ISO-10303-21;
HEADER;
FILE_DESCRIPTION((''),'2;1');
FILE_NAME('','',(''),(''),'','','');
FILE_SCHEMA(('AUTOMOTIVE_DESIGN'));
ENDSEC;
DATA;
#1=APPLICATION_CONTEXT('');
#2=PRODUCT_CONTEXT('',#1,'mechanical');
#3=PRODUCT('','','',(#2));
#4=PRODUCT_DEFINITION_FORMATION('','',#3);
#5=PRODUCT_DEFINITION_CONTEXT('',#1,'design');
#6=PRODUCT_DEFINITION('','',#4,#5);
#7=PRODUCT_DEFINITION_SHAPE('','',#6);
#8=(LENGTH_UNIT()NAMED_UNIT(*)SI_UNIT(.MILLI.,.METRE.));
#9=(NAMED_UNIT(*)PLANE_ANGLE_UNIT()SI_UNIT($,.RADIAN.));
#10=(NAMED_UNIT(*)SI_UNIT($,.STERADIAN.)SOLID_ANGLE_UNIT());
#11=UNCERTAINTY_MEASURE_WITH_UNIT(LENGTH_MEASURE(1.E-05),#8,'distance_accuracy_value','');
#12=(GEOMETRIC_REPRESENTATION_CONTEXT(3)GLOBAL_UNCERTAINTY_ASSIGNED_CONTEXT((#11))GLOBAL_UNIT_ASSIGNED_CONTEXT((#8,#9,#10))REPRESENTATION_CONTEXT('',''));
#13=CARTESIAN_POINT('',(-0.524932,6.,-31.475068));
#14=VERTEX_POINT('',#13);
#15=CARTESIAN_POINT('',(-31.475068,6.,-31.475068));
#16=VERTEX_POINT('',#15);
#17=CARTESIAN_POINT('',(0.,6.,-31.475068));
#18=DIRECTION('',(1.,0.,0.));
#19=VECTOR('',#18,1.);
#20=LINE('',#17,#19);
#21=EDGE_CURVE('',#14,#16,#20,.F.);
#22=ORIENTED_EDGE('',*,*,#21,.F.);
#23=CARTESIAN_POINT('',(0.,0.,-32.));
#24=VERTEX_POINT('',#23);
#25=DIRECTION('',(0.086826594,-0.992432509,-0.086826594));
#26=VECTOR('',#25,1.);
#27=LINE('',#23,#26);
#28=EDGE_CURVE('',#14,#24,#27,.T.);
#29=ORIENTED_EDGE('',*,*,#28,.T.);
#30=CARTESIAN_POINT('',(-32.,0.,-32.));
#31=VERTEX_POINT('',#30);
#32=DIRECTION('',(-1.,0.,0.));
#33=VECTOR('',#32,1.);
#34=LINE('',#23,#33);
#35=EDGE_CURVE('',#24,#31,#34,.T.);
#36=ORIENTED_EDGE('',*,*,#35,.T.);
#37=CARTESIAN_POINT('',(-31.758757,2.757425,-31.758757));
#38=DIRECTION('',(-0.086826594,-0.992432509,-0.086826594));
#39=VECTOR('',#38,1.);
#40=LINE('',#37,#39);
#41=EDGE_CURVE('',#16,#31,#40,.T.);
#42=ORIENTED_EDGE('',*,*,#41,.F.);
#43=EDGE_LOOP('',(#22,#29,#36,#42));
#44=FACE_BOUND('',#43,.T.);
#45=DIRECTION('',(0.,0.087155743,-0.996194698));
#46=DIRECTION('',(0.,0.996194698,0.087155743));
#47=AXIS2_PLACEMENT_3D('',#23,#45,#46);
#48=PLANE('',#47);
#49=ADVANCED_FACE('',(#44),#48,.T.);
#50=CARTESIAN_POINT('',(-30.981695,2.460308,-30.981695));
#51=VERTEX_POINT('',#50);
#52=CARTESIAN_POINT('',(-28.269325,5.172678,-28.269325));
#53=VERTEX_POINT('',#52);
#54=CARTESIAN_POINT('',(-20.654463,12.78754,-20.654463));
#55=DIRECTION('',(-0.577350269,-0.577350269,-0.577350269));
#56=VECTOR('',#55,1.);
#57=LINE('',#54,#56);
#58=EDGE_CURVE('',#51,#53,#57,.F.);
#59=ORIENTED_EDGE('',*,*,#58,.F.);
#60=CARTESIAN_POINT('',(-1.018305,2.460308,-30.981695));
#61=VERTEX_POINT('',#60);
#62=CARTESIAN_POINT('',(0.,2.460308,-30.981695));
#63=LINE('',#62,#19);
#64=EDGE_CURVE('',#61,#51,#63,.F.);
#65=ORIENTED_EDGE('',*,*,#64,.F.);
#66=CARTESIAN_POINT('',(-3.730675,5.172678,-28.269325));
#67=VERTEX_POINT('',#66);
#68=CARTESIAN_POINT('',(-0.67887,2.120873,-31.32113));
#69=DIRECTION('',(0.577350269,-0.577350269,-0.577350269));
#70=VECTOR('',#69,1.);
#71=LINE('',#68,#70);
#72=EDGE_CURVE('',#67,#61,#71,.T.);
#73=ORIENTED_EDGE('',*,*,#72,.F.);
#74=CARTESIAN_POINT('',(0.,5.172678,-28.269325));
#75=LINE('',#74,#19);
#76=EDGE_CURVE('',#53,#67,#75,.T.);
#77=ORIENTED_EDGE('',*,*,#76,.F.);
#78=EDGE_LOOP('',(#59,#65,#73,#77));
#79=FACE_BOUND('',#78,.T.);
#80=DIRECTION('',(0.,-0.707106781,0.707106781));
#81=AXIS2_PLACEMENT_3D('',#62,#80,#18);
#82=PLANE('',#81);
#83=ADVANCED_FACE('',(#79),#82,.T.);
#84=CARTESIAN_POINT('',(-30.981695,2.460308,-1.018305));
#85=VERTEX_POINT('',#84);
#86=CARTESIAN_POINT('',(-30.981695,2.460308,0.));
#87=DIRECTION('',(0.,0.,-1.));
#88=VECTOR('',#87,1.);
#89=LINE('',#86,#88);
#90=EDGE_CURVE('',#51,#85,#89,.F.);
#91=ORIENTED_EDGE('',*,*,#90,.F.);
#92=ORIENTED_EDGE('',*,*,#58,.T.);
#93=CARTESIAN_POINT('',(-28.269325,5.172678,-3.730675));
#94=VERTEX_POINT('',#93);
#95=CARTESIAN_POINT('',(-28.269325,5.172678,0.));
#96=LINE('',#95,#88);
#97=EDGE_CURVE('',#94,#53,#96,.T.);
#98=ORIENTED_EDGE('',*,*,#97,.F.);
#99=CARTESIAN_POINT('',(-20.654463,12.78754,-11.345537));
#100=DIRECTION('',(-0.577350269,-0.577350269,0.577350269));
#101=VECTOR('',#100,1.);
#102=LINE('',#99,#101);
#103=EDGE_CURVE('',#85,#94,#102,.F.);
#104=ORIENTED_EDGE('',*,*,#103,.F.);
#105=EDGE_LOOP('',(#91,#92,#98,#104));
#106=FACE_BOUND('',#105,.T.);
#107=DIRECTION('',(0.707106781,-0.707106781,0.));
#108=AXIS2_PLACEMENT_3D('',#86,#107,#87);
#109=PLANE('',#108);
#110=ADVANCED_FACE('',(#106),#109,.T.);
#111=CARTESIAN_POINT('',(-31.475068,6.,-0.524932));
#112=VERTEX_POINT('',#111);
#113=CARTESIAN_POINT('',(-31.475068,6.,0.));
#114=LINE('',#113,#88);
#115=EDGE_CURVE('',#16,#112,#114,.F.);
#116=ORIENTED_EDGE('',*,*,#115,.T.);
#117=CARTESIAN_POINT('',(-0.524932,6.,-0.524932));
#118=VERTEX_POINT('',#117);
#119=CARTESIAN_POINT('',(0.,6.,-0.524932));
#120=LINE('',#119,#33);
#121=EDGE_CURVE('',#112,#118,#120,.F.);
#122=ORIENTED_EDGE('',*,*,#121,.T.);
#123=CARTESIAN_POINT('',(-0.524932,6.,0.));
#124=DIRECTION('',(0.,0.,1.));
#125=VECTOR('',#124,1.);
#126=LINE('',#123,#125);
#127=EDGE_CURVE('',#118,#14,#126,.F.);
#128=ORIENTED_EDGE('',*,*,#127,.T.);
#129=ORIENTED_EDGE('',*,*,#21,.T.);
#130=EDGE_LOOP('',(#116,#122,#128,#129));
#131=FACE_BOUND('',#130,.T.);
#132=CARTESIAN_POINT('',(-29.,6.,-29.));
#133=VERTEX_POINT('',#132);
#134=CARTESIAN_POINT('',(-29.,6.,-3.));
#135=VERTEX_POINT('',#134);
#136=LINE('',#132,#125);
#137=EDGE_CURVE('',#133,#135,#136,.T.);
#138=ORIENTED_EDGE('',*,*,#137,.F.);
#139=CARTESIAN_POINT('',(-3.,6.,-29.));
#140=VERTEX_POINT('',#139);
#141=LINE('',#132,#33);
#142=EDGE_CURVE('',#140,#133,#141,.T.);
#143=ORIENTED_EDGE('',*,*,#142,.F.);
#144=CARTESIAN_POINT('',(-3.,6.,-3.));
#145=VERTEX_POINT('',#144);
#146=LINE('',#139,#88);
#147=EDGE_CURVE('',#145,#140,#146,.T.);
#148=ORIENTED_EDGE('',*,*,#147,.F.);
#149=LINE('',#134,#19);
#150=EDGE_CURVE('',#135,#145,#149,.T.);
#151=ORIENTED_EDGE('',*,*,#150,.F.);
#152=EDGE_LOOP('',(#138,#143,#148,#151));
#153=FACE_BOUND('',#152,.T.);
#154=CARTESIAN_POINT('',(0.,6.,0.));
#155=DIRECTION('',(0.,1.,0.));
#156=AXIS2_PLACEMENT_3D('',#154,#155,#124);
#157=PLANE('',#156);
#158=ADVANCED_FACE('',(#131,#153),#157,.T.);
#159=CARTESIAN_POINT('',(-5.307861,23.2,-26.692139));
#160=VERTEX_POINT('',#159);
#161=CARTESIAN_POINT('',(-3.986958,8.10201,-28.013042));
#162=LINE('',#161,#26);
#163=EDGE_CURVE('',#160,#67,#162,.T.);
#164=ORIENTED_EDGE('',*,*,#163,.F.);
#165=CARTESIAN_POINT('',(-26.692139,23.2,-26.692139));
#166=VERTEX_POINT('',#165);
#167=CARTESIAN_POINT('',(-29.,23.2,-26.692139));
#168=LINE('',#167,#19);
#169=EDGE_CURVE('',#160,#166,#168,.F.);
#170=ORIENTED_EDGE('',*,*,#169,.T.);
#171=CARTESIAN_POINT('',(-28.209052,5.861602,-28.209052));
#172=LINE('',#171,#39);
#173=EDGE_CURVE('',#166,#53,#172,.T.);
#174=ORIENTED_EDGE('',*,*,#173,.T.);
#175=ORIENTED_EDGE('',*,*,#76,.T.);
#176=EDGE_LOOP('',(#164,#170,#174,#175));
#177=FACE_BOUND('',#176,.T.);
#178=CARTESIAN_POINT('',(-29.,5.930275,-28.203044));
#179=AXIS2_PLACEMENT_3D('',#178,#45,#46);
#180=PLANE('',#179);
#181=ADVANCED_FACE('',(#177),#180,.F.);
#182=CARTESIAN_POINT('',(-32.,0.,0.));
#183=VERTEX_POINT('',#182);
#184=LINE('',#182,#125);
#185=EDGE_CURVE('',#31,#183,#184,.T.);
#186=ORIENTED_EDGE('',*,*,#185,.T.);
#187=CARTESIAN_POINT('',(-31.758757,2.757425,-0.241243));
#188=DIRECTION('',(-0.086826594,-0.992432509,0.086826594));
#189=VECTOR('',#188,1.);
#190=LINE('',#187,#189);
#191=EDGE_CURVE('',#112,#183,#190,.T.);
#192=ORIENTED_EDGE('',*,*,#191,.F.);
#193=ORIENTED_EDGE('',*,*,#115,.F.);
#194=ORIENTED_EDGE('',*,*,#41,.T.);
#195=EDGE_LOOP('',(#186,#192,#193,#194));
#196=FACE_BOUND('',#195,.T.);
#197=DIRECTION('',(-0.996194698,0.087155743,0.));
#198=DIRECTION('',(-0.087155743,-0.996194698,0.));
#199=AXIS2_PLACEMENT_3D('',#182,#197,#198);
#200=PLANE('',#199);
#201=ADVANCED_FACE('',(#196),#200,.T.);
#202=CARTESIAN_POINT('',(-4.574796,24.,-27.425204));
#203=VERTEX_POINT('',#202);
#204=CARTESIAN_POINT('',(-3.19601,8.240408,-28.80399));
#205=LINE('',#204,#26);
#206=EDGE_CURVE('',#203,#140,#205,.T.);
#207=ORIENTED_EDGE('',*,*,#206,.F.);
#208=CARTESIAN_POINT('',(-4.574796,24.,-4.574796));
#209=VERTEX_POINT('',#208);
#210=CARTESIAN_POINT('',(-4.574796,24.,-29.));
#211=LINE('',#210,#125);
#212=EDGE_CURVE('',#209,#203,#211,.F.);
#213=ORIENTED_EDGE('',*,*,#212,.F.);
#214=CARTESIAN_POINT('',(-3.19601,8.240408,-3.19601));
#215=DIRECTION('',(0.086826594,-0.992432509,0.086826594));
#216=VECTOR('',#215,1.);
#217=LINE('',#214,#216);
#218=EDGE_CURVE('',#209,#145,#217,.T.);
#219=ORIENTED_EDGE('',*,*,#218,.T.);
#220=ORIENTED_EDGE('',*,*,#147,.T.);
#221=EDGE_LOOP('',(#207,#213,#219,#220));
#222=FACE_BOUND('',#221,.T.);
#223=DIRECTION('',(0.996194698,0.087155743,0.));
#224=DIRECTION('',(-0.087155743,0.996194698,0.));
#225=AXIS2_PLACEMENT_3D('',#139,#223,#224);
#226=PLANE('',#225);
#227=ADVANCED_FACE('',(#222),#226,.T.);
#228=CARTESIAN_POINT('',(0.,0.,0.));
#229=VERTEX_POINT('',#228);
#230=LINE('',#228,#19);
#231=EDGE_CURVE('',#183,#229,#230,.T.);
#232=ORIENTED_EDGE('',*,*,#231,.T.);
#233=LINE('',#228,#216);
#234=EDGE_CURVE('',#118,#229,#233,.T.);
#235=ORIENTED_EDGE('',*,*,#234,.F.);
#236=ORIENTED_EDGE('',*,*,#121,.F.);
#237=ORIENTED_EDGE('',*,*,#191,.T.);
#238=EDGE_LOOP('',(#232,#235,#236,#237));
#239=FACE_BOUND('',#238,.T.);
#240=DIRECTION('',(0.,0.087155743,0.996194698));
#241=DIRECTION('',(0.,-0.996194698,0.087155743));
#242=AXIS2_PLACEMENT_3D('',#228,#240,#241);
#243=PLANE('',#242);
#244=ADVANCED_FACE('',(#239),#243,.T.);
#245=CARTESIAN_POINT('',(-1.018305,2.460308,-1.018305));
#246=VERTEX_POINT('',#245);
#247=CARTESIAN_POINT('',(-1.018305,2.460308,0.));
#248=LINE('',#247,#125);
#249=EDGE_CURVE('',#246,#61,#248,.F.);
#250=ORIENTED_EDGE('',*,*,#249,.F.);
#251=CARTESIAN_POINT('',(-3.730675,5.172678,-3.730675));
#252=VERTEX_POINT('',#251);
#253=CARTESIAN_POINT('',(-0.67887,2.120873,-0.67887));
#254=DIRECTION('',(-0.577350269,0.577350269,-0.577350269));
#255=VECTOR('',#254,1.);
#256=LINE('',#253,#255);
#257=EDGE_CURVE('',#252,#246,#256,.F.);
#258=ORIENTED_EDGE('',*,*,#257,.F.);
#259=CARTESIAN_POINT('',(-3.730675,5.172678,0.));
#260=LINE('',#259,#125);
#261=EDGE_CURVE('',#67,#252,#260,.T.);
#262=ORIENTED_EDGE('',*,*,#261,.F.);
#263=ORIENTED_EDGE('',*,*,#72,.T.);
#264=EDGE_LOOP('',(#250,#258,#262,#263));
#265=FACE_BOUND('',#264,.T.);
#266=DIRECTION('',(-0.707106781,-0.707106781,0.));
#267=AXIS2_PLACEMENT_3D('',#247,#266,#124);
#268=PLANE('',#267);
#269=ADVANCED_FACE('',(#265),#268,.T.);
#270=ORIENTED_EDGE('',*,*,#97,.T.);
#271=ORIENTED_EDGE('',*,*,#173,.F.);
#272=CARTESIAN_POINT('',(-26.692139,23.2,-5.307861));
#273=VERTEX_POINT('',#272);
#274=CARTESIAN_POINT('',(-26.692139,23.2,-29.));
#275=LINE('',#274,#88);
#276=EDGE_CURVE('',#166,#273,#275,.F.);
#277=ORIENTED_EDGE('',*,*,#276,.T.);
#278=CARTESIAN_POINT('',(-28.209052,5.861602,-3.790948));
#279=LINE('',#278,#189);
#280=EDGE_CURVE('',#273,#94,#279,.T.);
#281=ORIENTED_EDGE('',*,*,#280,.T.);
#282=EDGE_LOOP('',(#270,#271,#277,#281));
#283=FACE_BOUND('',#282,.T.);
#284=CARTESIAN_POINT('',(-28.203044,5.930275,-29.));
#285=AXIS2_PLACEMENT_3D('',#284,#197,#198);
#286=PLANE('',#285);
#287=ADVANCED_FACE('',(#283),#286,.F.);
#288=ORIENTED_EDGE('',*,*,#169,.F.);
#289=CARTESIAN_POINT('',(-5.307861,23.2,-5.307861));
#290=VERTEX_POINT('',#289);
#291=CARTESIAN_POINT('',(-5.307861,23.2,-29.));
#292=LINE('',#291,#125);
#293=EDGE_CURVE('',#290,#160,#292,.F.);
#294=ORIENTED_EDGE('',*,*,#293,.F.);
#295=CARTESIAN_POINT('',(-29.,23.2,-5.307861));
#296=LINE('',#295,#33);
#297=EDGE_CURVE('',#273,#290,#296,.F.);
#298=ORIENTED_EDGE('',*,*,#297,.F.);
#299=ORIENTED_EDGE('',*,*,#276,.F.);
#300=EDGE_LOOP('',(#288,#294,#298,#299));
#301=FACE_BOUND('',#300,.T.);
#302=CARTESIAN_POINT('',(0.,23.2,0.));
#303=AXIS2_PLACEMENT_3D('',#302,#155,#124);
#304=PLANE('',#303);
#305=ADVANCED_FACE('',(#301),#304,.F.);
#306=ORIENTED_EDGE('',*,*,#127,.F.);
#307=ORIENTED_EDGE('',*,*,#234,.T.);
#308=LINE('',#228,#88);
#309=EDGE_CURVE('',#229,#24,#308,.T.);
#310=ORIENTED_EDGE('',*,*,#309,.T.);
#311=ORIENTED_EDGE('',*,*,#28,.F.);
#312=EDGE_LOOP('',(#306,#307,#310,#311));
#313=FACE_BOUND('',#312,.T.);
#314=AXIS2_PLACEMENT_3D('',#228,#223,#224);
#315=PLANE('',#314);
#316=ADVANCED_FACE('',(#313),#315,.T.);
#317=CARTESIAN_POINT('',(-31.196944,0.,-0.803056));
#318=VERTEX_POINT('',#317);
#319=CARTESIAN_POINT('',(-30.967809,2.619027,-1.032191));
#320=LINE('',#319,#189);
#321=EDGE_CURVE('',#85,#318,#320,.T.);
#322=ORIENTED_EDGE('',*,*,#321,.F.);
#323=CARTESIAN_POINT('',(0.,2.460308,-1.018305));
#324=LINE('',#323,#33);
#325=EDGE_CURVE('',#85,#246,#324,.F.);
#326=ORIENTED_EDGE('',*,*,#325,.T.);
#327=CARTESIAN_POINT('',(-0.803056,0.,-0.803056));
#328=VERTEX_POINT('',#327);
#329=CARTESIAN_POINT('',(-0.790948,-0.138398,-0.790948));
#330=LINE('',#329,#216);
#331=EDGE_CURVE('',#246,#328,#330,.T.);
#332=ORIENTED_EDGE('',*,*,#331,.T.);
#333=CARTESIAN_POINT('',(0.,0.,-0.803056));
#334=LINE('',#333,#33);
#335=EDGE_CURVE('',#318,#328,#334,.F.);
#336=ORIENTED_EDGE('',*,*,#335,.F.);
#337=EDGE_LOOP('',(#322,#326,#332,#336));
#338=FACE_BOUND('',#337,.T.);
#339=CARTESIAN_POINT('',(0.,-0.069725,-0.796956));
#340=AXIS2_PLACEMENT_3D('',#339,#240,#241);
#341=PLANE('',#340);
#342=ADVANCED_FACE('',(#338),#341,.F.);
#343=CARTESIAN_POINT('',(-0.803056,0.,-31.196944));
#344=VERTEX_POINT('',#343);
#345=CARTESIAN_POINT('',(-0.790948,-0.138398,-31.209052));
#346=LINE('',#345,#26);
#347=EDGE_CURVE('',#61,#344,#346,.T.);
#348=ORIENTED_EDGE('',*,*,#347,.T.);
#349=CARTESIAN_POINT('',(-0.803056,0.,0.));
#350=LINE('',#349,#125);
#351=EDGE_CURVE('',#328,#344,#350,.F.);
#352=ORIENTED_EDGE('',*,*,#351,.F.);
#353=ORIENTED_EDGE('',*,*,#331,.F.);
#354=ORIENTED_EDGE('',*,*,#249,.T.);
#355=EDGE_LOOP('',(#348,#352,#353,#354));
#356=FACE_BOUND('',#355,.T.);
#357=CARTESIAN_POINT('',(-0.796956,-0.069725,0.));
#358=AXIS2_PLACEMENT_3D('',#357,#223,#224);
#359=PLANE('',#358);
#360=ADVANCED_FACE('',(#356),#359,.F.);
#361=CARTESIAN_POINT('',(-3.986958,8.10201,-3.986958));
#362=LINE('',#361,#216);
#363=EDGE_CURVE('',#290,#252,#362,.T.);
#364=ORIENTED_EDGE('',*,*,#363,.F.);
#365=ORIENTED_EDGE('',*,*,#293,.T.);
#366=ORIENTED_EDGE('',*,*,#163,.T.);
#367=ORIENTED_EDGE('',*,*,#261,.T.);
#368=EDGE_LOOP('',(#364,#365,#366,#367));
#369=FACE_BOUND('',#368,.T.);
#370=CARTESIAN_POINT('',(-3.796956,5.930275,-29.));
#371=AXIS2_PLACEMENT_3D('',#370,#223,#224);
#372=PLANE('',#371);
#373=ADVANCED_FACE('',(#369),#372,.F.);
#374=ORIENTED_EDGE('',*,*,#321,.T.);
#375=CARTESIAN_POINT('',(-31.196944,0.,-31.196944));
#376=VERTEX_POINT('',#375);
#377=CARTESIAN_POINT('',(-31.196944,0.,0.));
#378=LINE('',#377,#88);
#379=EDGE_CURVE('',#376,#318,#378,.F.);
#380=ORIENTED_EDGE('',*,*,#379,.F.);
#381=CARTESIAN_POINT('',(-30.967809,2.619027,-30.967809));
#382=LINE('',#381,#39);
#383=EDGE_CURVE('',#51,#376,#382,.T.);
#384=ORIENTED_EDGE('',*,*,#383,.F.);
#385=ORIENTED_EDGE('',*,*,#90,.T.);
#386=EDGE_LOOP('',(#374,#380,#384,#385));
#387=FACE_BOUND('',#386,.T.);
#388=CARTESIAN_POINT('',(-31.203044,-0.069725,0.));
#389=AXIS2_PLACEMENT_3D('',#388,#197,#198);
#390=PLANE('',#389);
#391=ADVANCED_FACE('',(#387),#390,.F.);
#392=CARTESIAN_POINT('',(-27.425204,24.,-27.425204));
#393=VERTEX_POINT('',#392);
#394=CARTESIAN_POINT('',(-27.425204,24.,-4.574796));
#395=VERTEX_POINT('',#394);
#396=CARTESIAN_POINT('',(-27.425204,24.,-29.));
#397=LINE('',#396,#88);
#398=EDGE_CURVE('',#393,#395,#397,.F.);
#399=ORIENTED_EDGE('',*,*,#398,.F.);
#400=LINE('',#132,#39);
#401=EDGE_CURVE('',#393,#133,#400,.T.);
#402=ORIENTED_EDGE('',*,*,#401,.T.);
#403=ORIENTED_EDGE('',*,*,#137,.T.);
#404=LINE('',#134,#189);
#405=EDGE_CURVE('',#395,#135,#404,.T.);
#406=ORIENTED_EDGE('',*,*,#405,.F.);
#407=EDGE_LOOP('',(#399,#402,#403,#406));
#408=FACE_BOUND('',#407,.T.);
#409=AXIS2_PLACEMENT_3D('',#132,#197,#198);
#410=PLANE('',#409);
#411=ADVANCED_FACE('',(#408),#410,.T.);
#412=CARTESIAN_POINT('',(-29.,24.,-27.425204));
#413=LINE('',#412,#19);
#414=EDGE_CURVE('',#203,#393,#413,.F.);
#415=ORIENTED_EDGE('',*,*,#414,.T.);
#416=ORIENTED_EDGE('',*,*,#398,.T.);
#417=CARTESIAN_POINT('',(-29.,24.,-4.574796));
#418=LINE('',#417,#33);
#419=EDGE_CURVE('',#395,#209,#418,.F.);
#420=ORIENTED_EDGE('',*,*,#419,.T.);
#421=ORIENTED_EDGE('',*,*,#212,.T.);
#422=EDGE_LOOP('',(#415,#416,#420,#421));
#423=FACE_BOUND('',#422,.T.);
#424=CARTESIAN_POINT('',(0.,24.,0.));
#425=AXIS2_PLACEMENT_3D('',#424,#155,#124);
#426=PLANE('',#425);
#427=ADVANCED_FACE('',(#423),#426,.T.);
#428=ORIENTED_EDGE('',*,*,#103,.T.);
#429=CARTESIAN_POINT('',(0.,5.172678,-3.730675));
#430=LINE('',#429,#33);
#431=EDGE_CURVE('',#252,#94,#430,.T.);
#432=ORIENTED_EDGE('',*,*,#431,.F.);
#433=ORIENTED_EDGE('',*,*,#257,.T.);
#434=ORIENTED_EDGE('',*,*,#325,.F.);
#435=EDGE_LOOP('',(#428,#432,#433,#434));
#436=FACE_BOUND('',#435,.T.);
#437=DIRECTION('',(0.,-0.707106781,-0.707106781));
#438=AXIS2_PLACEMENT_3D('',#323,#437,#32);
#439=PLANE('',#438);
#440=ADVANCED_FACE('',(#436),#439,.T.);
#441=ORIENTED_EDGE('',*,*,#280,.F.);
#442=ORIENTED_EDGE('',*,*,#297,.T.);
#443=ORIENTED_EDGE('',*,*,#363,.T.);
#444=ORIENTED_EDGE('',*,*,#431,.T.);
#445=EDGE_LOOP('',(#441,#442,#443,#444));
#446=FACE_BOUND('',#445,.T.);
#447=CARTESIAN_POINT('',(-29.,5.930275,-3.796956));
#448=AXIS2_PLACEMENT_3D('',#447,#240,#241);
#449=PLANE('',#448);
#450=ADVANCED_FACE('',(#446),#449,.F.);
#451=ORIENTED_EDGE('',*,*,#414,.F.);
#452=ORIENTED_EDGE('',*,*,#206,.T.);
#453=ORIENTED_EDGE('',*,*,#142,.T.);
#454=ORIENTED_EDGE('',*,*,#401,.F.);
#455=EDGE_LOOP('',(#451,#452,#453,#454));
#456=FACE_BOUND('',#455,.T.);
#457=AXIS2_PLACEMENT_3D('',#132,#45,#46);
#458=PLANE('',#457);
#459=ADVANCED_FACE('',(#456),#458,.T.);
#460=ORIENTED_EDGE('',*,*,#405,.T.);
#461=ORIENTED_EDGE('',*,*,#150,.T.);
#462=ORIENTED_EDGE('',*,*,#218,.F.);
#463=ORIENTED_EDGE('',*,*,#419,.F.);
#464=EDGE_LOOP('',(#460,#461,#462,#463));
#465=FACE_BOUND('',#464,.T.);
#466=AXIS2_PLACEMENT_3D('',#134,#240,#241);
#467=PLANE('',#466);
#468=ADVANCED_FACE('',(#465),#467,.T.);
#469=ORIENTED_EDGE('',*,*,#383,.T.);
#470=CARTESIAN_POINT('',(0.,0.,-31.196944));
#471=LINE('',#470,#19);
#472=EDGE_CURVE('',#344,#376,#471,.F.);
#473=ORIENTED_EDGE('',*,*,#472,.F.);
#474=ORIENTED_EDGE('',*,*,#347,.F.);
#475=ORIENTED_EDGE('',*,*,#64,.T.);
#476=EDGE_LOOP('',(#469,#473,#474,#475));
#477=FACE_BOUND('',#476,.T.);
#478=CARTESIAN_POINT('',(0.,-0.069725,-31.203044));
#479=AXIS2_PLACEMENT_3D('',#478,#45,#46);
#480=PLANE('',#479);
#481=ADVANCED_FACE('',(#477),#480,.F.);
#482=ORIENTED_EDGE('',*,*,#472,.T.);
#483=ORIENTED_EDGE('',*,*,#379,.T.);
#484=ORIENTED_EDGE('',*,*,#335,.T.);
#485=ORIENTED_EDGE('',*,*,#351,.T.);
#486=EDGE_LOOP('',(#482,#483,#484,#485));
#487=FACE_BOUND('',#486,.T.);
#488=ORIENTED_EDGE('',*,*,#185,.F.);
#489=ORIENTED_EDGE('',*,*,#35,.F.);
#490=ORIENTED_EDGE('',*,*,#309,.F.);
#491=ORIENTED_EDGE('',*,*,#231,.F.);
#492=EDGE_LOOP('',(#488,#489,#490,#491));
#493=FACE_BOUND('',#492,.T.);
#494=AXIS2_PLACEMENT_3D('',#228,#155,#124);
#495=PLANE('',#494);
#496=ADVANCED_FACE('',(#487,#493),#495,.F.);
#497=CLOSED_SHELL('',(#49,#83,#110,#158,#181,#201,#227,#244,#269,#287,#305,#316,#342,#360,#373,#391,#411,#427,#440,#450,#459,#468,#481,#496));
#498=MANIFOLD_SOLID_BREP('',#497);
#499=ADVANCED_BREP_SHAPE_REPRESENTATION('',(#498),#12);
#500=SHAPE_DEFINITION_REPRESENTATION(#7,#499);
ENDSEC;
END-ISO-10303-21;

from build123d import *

# Parameters (mm, degrees)
SKETCH1_W           = 32
SKETCH1_H           = 32
BOSS_EXTRUDE1_DEPTH = 6
BOSS_EXTRUDE1_TAPER = 5
SKETCH2_W           = 26
SKETCH2_H           = 26
BOSS_EXTRUDE2_DEPTH = 18
BOSS_EXTRUDE2_TAPER = 5
SHELL1_T            = -0.8
CHAMFER1_SIZE       = 2.5
CHAMFER1_SIZE_2     = 2.750157169


with BuildPart() as part:
    # Sketch1 → Boss-Extrude1 (new body)
    with BuildSketch(Plane(origin=(0, 0, 0), x_dir=(1, 0, 0), z_dir=(0, 1, 0))):
        with Locations((-16, 16)):
            Rectangle(SKETCH1_W, SKETCH1_H)
    extrude(amount=BOSS_EXTRUDE1_DEPTH, taper=BOSS_EXTRUDE1_TAPER)

    # Sketch2 → Boss-Extrude2 (add)
    with BuildSketch(Plane(origin=(0, 6, 0), x_dir=(1, 0, 0), z_dir=(0, 1, 0))):
        with Locations((-16, 16)):
            Rectangle(SKETCH2_W, SKETCH2_H)
    extrude(amount=BOSS_EXTRUDE2_DEPTH, taper=BOSS_EXTRUDE2_TAPER)

    # Shell1
    shell1_openings = [part.faces().sort_by_distance(p)[0] for p in [
        (-16, 0, -16),
    ]]
    offset(amount=SHELL1_T, openings=shell1_openings, kind=Kind.INTERSECTION)

    # Chamfer1
    # the kernel refuses this chamfer: 2.750157169, 2.5 mm, written as the material it adds along each edge
    with BuildSketch(Plane(origin=(5.830274952, 5.2, -1.25799692), x_dir=(0, 0.030161850139926293, -0.9995450278982617), z_dir=(-1, 0, 0))) as chamfer1_piece_1_section:
        Polygon((CHAMFER1_SIZE * 0.999545027898, CHAMFER1_SIZE * 0.0301618501399), (-CHAMFER1_SIZE_2 * 0.117163164513, CHAMFER1_SIZE_2 * 0.993112678869), (0, 0), align=None)
    chamfer1_piece_1 = extrude(amount=43.660549905, mode=Mode.PRIVATE)
    chamfer1_piece_1 = split(chamfer1_piece_1, bisect_by=Plane(origin=(-1.2737044, 5.379537315, -3.779154262), z_dir=(-0.9961946980917455, -0.08715574274765792, 0)), keep=Keep.TOP, mode=Mode.PRIVATE)
    chamfer1_piece_1 = split(chamfer1_piece_1, bisect_by=Plane(origin=(-3.729971497, 5.164641789, -3.779154262), z_dir=(0.9961946980917455, 0.08715574274765821, 0)), keep=Keep.TOP, mode=Mode.PRIVATE)
    chamfer1_piece_1 = split(chamfer1_piece_1, bisect_by=Plane(origin=(-2.501837948, 5.275543614, -3.739674149), z_dir=(0, -0.08715574274765829, -0.9961946980917455)), keep=Keep.TOP, mode=Mode.PRIVATE)
    add(chamfer1_piece_1)
    with BuildSketch(Plane(origin=(5.830274952, 5.2, -1.25799692), x_dir=(0, 0.030161850139926293, -0.9995450278982617), z_dir=(-1, 0, 0))) as chamfer1_piece_2_section:
        Polygon((CHAMFER1_SIZE * 0.999545027898, CHAMFER1_SIZE * 0.0301618501399), (-CHAMFER1_SIZE_2 * 0.117163164513, CHAMFER1_SIZE_2 * 0.993112678869), (0, 0), align=None)
    chamfer1_piece_2 = extrude(amount=43.660549905, mode=Mode.PRIVATE)
    chamfer1_piece_2 = split(chamfer1_piece_2, bisect_by=Plane(origin=(-1.187972058, 4.399612159, -1.99521412), z_dir=(-0.9961946980917455, -0.08715574274765792, 0)), keep=Keep.TOP, mode=Mode.PRIVATE)
    chamfer1_piece_2 = split(chamfer1_piece_2, bisect_by=Plane(origin=(-3.644239154, 4.184716633, -1.99521412), z_dir=(0.9961946980917455, 0.08715574274765821, 0)), keep=Keep.TOP, mode=Mode.PRIVATE)
    chamfer1_piece_2 = split(chamfer1_piece_2, bisect_by=Plane(origin=(-2.416105606, 4.148173113, -3.641042011), z_dir=(0, 0.08715574274765829, 0.9961946980917455)), keep=Keep.TOP, mode=Mode.PRIVATE)
    add(chamfer1_piece_2)
    with BuildSketch(Plane(origin=(5.830274952, 5.2, -1.25799692), x_dir=(0, 0.030161850139926293, -0.9995450278982617), z_dir=(-1, 0, 0))) as chamfer1_piece_3_section:
        Polygon((CHAMFER1_SIZE * 0.999545027898, CHAMFER1_SIZE * 0.0301618501399), (-CHAMFER1_SIZE_2 * 0.117163164513, CHAMFER1_SIZE_2 * 0.993112678869), (0, 0), align=None)
    chamfer1_piece_3 = extrude(amount=43.660549905, mode=Mode.PRIVATE)
    chamfer1_piece_3 = split(chamfer1_piece_3, bisect_by=Plane(origin=(-3.747130429, 5.360769289, -1.993289961), z_dir=(-0.9961946980917455, -0.08715574274765821, 0)), keep=Keep.TOP, mode=Mode.PRIVATE)
    chamfer1_piece_3 = split(chamfer1_piece_3, bisect_by=Plane(origin=(-16, 4.144649452, -3.64073373), z_dir=(0, 0.08715574274765829, 0.9961946980917455)), keep=Keep.TOP, mode=Mode.PRIVATE)
    chamfer1_piece_3 = split(chamfer1_piece_3, bisect_by=Plane(origin=(-28.252869571, 5.360769289, -1.993289961), z_dir=(0.9961946980917455, -0.08715574274765829, 0)), keep=Keep.TOP, mode=Mode.PRIVATE)
    add(chamfer1_piece_3)
    with BuildSketch(Plane(origin=(5.830274952, 5.2, -1.25799692), x_dir=(0, 0.030161850139926293, -0.9995450278982617), z_dir=(-1, 0, 0))) as chamfer1_piece_4_section:
        Polygon((CHAMFER1_SIZE * 0.999545027898, CHAMFER1_SIZE * 0.0301618501399), (-CHAMFER1_SIZE_2 * 0.117163164513, CHAMFER1_SIZE_2 * 0.993112678869), (0, 0), align=None)
    chamfer1_piece_4 = extrude(amount=43.660549905, mode=Mode.PRIVATE)
    chamfer1_piece_4 = split(chamfer1_piece_4, bisect_by=Plane(origin=(-29.498162052, 5.275543614, -3.739674149), z_dir=(0, -0.08715574274765829, -0.9961946980917455)), keep=Keep.TOP, mode=Mode.PRIVATE)
    chamfer1_piece_4 = split(chamfer1_piece_4, bisect_by=Plane(origin=(-28.270028503, 5.164641789, -3.779154262), z_dir=(-0.9961946980917455, 0.08715574274765829, 0)), keep=Keep.TOP, mode=Mode.PRIVATE)
    chamfer1_piece_4 = split(chamfer1_piece_4, bisect_by=Plane(origin=(-30.7262956, 5.379537315, -3.779154262), z_dir=(0.9961946980917455, -0.08715574274765851, 0)), keep=Keep.TOP, mode=Mode.PRIVATE)
    add(chamfer1_piece_4)
    with BuildSketch(Plane(origin=(5.830274952, 5.2, -1.25799692), x_dir=(0, 0.030161850139926293, -0.9995450278982617), z_dir=(-1, 0, 0))) as chamfer1_piece_5_section:
        Polygon((CHAMFER1_SIZE * 0.999545027898, CHAMFER1_SIZE * 0.0301618501399), (-CHAMFER1_SIZE_2 * 0.117163164513, CHAMFER1_SIZE_2 * 0.993112678869), (0, 0), align=None)
    chamfer1_piece_5 = extrude(amount=43.660549905, mode=Mode.PRIVATE)
    chamfer1_piece_5 = split(chamfer1_piece_5, bisect_by=Plane(origin=(-29.583894394, 4.148173113, -3.641042011), z_dir=(0, 0.08715574274765829, 0.9961946980917455)), keep=Keep.TOP, mode=Mode.PRIVATE)
    chamfer1_piece_5 = split(chamfer1_piece_5, bisect_by=Plane(origin=(-28.355760846, 4.184716633, -1.99521412), z_dir=(-0.9961946980917455, 0.08715574274765829, 0)), keep=Keep.TOP, mode=Mode.PRIVATE)
    chamfer1_piece_5 = split(chamfer1_piece_5, bisect_by=Plane(origin=(-30.812027942, 4.399612159, -1.99521412), z_dir=(0.9961946980917455, -0.08715574274765851, 0)), keep=Keep.TOP, mode=Mode.PRIVATE)
    add(chamfer1_piece_5)
    with BuildSketch(Plane(origin=(-30.74200308, 5.2, 5.830274952), x_dir=(0.9995450278982617, 0.030161850139926356, 0), z_dir=(0, 0, -1))) as chamfer1_piece_6_section:
        Polygon((CHAMFER1_SIZE * 0.999545027898, CHAMFER1_SIZE * 0.0301618501399), (-CHAMFER1_SIZE_2 * 0.117163164513, CHAMFER1_SIZE_2 * 0.993112678869), (0, 0), align=None)
    chamfer1_piece_6 = extrude(amount=43.660549905, mode=Mode.PRIVATE)
    chamfer1_piece_6 = split(chamfer1_piece_6, bisect_by=Plane(origin=(-28.220845738, 5.164641789, -3.729971497), z_dir=(0, 0.08715574274765829, 0.9961946980917455)), keep=Keep.TOP, mode=Mode.PRIVATE)
    chamfer1_piece_6 = split(chamfer1_piece_6, bisect_by=Plane(origin=(-28.260325851, 5.275543614, -2.501837948), z_dir=(0.9961946980917455, -0.08715574274765829, 0)), keep=Keep.TOP, mode=Mode.PRIVATE)
    chamfer1_piece_6 = split(chamfer1_piece_6, bisect_by=Plane(origin=(-28.220845738, 5.379537315, -1.2737044), z_dir=(0, -0.08715574274765792, -0.9961946980917455)), keep=Keep.TOP, mode=Mode.PRIVATE)
    add(chamfer1_piece_6)
    with BuildSketch(Plane(origin=(-30.74200308, 5.2, 5.830274952), x_dir=(0.9995450278982617, 0.030161850139926356, 0), z_dir=(0, 0, -1))) as chamfer1_piece_7_section:
        Polygon((CHAMFER1_SIZE * 0.999545027898, CHAMFER1_SIZE * 0.0301618501399), (-CHAMFER1_SIZE_2 * 0.117163164513, CHAMFER1_SIZE_2 * 0.993112678869), (0, 0), align=None)
    chamfer1_piece_7 = extrude(amount=43.660549905, mode=Mode.PRIVATE)
    chamfer1_piece_7 = split(chamfer1_piece_7, bisect_by=Plane(origin=(-30.00478588, 4.184716633, -3.644239154), z_dir=(0, 0.08715574274765829, 0.9961946980917455)), keep=Keep.TOP, mode=Mode.PRIVATE)
    chamfer1_piece_7 = split(chamfer1_piece_7, bisect_by=Plane(origin=(-28.358957989, 4.148173113, -2.416105606), z_dir=(-0.9961946980917455, 0.08715574274765829, 0)), keep=Keep.TOP, mode=Mode.PRIVATE)
    chamfer1_piece_7 = split(chamfer1_piece_7, bisect_by=Plane(origin=(-30.00478588, 4.399612159, -1.187972058), z_dir=(0, -0.08715574274765792, -0.9961946980917455)), keep=Keep.TOP, mode=Mode.PRIVATE)
    add(chamfer1_piece_7)
    with BuildSketch(Plane(origin=(-30.74200308, 5.2, 5.830274952), x_dir=(0.9995450278982617, 0.030161850139926356, 0), z_dir=(0, 0, -1))) as chamfer1_piece_8_section:
        Polygon((CHAMFER1_SIZE * 0.999545027898, CHAMFER1_SIZE * 0.0301618501399), (-CHAMFER1_SIZE_2 * 0.117163164513, CHAMFER1_SIZE_2 * 0.993112678869), (0, 0), align=None)
    chamfer1_piece_8 = extrude(amount=43.660549905, mode=Mode.PRIVATE)
    chamfer1_piece_8 = split(chamfer1_piece_8, bisect_by=Plane(origin=(-30.006710039, 5.360769289, -28.252869571), z_dir=(0, -0.08715574274765829, 0.9961946980917455)), keep=Keep.TOP, mode=Mode.PRIVATE)
    chamfer1_piece_8 = split(chamfer1_piece_8, bisect_by=Plane(origin=(-30.006710039, 5.360769289, -3.747130429), z_dir=(0, -0.08715574274765829, -0.9961946980917455)), keep=Keep.TOP, mode=Mode.PRIVATE)
    chamfer1_piece_8 = split(chamfer1_piece_8, bisect_by=Plane(origin=(-28.35926627, 4.144649452, -16), z_dir=(-0.9961946980917455, 0.08715574274765829, 0)), keep=Keep.TOP, mode=Mode.PRIVATE)
    add(chamfer1_piece_8)
    with BuildSketch(Plane(origin=(-30.74200308, 5.2, 5.830274952), x_dir=(0.9995450278982617, 0.030161850139926356, 0), z_dir=(0, 0, -1))) as chamfer1_piece_9_section:
        Polygon((CHAMFER1_SIZE * 0.999545027898, CHAMFER1_SIZE * 0.0301618501399), (-CHAMFER1_SIZE_2 * 0.117163164513, CHAMFER1_SIZE_2 * 0.993112678869), (0, 0), align=None)
    chamfer1_piece_9 = extrude(amount=43.660549905, mode=Mode.PRIVATE)
    chamfer1_piece_9 = split(chamfer1_piece_9, bisect_by=Plane(origin=(-28.220845738, 5.379537315, -30.7262956), z_dir=(0, -0.08715574274765836, 0.9961946980917455)), keep=Keep.TOP, mode=Mode.PRIVATE)
    chamfer1_piece_9 = split(chamfer1_piece_9, bisect_by=Plane(origin=(-28.220845738, 5.164641789, -28.270028503), z_dir=(0, 0.08715574274765829, -0.9961946980917455)), keep=Keep.TOP, mode=Mode.PRIVATE)
    chamfer1_piece_9 = split(chamfer1_piece_9, bisect_by=Plane(origin=(-28.260325851, 5.275543614, -29.498162052), z_dir=(0.9961946980917455, -0.08715574274765829, 0)), keep=Keep.TOP, mode=Mode.PRIVATE)
    add(chamfer1_piece_9)
    with BuildSketch(Plane(origin=(-30.74200308, 5.2, 5.830274952), x_dir=(0.9995450278982617, 0.030161850139926356, 0), z_dir=(0, 0, -1))) as chamfer1_piece_10_section:
        Polygon((CHAMFER1_SIZE * 0.999545027898, CHAMFER1_SIZE * 0.0301618501399), (-CHAMFER1_SIZE_2 * 0.117163164513, CHAMFER1_SIZE_2 * 0.993112678869), (0, 0), align=None)
    chamfer1_piece_10 = extrude(amount=43.660549905, mode=Mode.PRIVATE)
    chamfer1_piece_10 = split(chamfer1_piece_10, bisect_by=Plane(origin=(-30.00478588, 4.399612159, -30.812027942), z_dir=(0, -0.08715574274765836, 0.9961946980917455)), keep=Keep.TOP, mode=Mode.PRIVATE)
    chamfer1_piece_10 = split(chamfer1_piece_10, bisect_by=Plane(origin=(-30.00478588, 4.184716633, -28.355760846), z_dir=(0, 0.08715574274765829, -0.9961946980917455)), keep=Keep.TOP, mode=Mode.PRIVATE)
    chamfer1_piece_10 = split(chamfer1_piece_10, bisect_by=Plane(origin=(-28.358957989, 4.148173113, -29.583894394), z_dir=(-0.9961946980917455, 0.08715574274765829, 0)), keep=Keep.TOP, mode=Mode.PRIVATE)
    add(chamfer1_piece_10)
    with BuildSketch(Plane(origin=(5.830274952, 5.2, -30.74200308), x_dir=(0, -0.9937112432628153, -0.11197305485280758), z_dir=(-1, 0, 0))) as chamfer1_piece_11_section:
        Polygon((CHAMFER1_SIZE_2 * 0.99968896676, CHAMFER1_SIZE_2 * 0.0249393220908), (-CHAMFER1_SIZE * 0.111973054853, CHAMFER1_SIZE * 0.993711243263), (0, 0), align=None)
    chamfer1_piece_11 = extrude(amount=43.660549905, mode=Mode.PRIVATE)
    chamfer1_piece_11 = split(chamfer1_piece_11, bisect_by=Plane(origin=(-1.187972058, 4.399612159, -30.00478588), z_dir=(-0.9961946980917455, -0.08715574274765792, 0)), keep=Keep.TOP, mode=Mode.PRIVATE)
    chamfer1_piece_11 = split(chamfer1_piece_11, bisect_by=Plane(origin=(-2.416105606, 4.148173113, -28.358957989), z_dir=(0, 0.08715574274765829, -0.9961946980917455)), keep=Keep.TOP, mode=Mode.PRIVATE)
    chamfer1_piece_11 = split(chamfer1_piece_11, bisect_by=Plane(origin=(-3.644239154, 4.184716633, -30.00478588), z_dir=(0.9961946980917455, 0.08715574274765821, 0)), keep=Keep.TOP, mode=Mode.PRIVATE)
    add(chamfer1_piece_11)
    with BuildSketch(Plane(origin=(5.830274952, 5.2, -30.74200308), x_dir=(0, -0.9937112432628153, -0.11197305485280758), z_dir=(-1, 0, 0))) as chamfer1_piece_12_section:
        Polygon((CHAMFER1_SIZE_2 * 0.99968896676, CHAMFER1_SIZE_2 * 0.0249393220908), (-CHAMFER1_SIZE * 0.111973054853, CHAMFER1_SIZE * 0.993711243263), (0, 0), align=None)
    chamfer1_piece_12 = extrude(amount=43.660549905, mode=Mode.PRIVATE)
    chamfer1_piece_12 = split(chamfer1_piece_12, bisect_by=Plane(origin=(-1.2737044, 5.379537315, -28.220845738), z_dir=(-0.9961946980917455, -0.08715574274765792, 0)), keep=Keep.TOP, mode=Mode.PRIVATE)
    chamfer1_piece_12 = split(chamfer1_piece_12, bisect_by=Plane(origin=(-2.501837948, 5.275543614, -28.260325851), z_dir=(0, -0.08715574274765829, 0.9961946980917455)), keep=Keep.TOP, mode=Mode.PRIVATE)
    chamfer1_piece_12 = split(chamfer1_piece_12, bisect_by=Plane(origin=(-3.729971497, 5.164641789, -28.220845738), z_dir=(0.9961946980917455, 0.08715574274765821, 0)), keep=Keep.TOP, mode=Mode.PRIVATE)
    add(chamfer1_piece_12)
    with BuildSketch(Plane(origin=(5.830274952, 5.2, -30.74200308), x_dir=(0, -0.9937112432628153, -0.11197305485280758), z_dir=(-1, 0, 0))) as chamfer1_piece_13_section:
        Polygon((CHAMFER1_SIZE_2 * 0.99968896676, CHAMFER1_SIZE_2 * 0.0249393220908), (-CHAMFER1_SIZE * 0.111973054853, CHAMFER1_SIZE * 0.993711243263), (0, 0), align=None)
    chamfer1_piece_13 = extrude(amount=43.660549905, mode=Mode.PRIVATE)
    chamfer1_piece_13 = split(chamfer1_piece_13, bisect_by=Plane(origin=(-16, 4.144649452, -28.35926627), z_dir=(0, 0.08715574274765829, -0.9961946980917455)), keep=Keep.TOP, mode=Mode.PRIVATE)
    chamfer1_piece_13 = split(chamfer1_piece_13, bisect_by=Plane(origin=(-3.747130429, 5.360769289, -30.006710039), z_dir=(-0.9961946980917455, -0.08715574274765821, 0)), keep=Keep.TOP, mode=Mode.PRIVATE)
    chamfer1_piece_13 = split(chamfer1_piece_13, bisect_by=Plane(origin=(-28.252869571, 5.360769289, -30.006710039), z_dir=(0.9961946980917455, -0.08715574274765829, 0)), keep=Keep.TOP, mode=Mode.PRIVATE)
    add(chamfer1_piece_13)
    with BuildSketch(Plane(origin=(5.830274952, 5.2, -30.74200308), x_dir=(0, -0.9937112432628153, -0.11197305485280758), z_dir=(-1, 0, 0))) as chamfer1_piece_14_section:
        Polygon((CHAMFER1_SIZE_2 * 0.99968896676, CHAMFER1_SIZE_2 * 0.0249393220908), (-CHAMFER1_SIZE * 0.111973054853, CHAMFER1_SIZE * 0.993711243263), (0, 0), align=None)
    chamfer1_piece_14 = extrude(amount=43.660549905, mode=Mode.PRIVATE)
    chamfer1_piece_14 = split(chamfer1_piece_14, bisect_by=Plane(origin=(-30.812027942, 4.399612159, -30.00478588), z_dir=(0.9961946980917455, -0.08715574274765851, 0)), keep=Keep.TOP, mode=Mode.PRIVATE)
    chamfer1_piece_14 = split(chamfer1_piece_14, bisect_by=Plane(origin=(-29.583894394, 4.148173113, -28.358957989), z_dir=(0, 0.08715574274765829, -0.9961946980917455)), keep=Keep.TOP, mode=Mode.PRIVATE)
    chamfer1_piece_14 = split(chamfer1_piece_14, bisect_by=Plane(origin=(-28.355760846, 4.184716633, -30.00478588), z_dir=(-0.9961946980917455, 0.08715574274765829, 0)), keep=Keep.TOP, mode=Mode.PRIVATE)
    add(chamfer1_piece_14)
    with BuildSketch(Plane(origin=(5.830274952, 5.2, -30.74200308), x_dir=(0, -0.9937112432628153, -0.11197305485280758), z_dir=(-1, 0, 0))) as chamfer1_piece_15_section:
        Polygon((CHAMFER1_SIZE_2 * 0.99968896676, CHAMFER1_SIZE_2 * 0.0249393220908), (-CHAMFER1_SIZE * 0.111973054853, CHAMFER1_SIZE * 0.993711243263), (0, 0), align=None)
    chamfer1_piece_15 = extrude(amount=43.660549905, mode=Mode.PRIVATE)
    chamfer1_piece_15 = split(chamfer1_piece_15, bisect_by=Plane(origin=(-30.7262956, 5.379537315, -28.220845738), z_dir=(0.9961946980917455, -0.08715574274765851, 0)), keep=Keep.TOP, mode=Mode.PRIVATE)
    chamfer1_piece_15 = split(chamfer1_piece_15, bisect_by=Plane(origin=(-29.498162052, 5.275543614, -28.260325851), z_dir=(0, -0.08715574274765829, 0.9961946980917455)), keep=Keep.TOP, mode=Mode.PRIVATE)
    chamfer1_piece_15 = split(chamfer1_piece_15, bisect_by=Plane(origin=(-28.270028503, 5.164641789, -28.220845738), z_dir=(-0.9961946980917455, 0.08715574274765829, 0)), keep=Keep.TOP, mode=Mode.PRIVATE)
    add(chamfer1_piece_15)
    with BuildSketch(Plane(origin=(-1.25799692, 5.2, 5.830274952), x_dir=(0.11197305485280797, -0.9937112432628151, 0), z_dir=(0, 0, -1))) as chamfer1_piece_16_section:
        Polygon((CHAMFER1_SIZE_2 * 0.99968896676, CHAMFER1_SIZE_2 * 0.0249393220908), (-CHAMFER1_SIZE * 0.111973054853, CHAMFER1_SIZE * 0.993711243263), (0, 0), align=None)
    chamfer1_piece_16 = extrude(amount=43.660549905, mode=Mode.PRIVATE)
    chamfer1_piece_16 = split(chamfer1_piece_16, bisect_by=Plane(origin=(-1.99521412, 4.399612159, -1.187972058), z_dir=(0, -0.08715574274765792, -0.9961946980917455)), keep=Keep.TOP, mode=Mode.PRIVATE)
    chamfer1_piece_16 = split(chamfer1_piece_16, bisect_by=Plane(origin=(-3.641042011, 4.148173113, -2.416105606), z_dir=(0.9961946980917455, 0.08715574274765821, 0)), keep=Keep.TOP, mode=Mode.PRIVATE)
    chamfer1_piece_16 = split(chamfer1_piece_16, bisect_by=Plane(origin=(-1.99521412, 4.184716633, -3.644239154), z_dir=(0, 0.08715574274765829, 0.9961946980917455)), keep=Keep.TOP, mode=Mode.PRIVATE)
    add(chamfer1_piece_16)
    with BuildSketch(Plane(origin=(-1.25799692, 5.2, 5.830274952), x_dir=(0.11197305485280797, -0.9937112432628151, 0), z_dir=(0, 0, -1))) as chamfer1_piece_17_section:
        Polygon((CHAMFER1_SIZE_2 * 0.99968896676, CHAMFER1_SIZE_2 * 0.0249393220908), (-CHAMFER1_SIZE * 0.111973054853, CHAMFER1_SIZE * 0.993711243263), (0, 0), align=None)
    chamfer1_piece_17 = extrude(amount=43.660549905, mode=Mode.PRIVATE)
    chamfer1_piece_17 = split(chamfer1_piece_17, bisect_by=Plane(origin=(-3.779154262, 5.379537315, -1.2737044), z_dir=(0, -0.08715574274765792, -0.9961946980917455)), keep=Keep.TOP, mode=Mode.PRIVATE)
    chamfer1_piece_17 = split(chamfer1_piece_17, bisect_by=Plane(origin=(-3.739674149, 5.275543614, -2.501837948), z_dir=(-0.9961946980917455, -0.08715574274765821, 0)), keep=Keep.TOP, mode=Mode.PRIVATE)
    chamfer1_piece_17 = split(chamfer1_piece_17, bisect_by=Plane(origin=(-3.779154262, 5.164641789, -3.729971497), z_dir=(0, 0.08715574274765829, 0.9961946980917455)), keep=Keep.TOP, mode=Mode.PRIVATE)
    add(chamfer1_piece_17)
    with BuildSketch(Plane(origin=(-1.25799692, 5.2, 5.830274952), x_dir=(0.11197305485280797, -0.9937112432628151, 0), z_dir=(0, 0, -1))) as chamfer1_piece_18_section:
        Polygon((CHAMFER1_SIZE_2 * 0.99968896676, CHAMFER1_SIZE_2 * 0.0249393220908), (-CHAMFER1_SIZE * 0.111973054853, CHAMFER1_SIZE * 0.993711243263), (0, 0), align=None)
    chamfer1_piece_18 = extrude(amount=43.660549905, mode=Mode.PRIVATE)
    chamfer1_piece_18 = split(chamfer1_piece_18, bisect_by=Plane(origin=(-1.993289961, 5.360769289, -28.252869571), z_dir=(0, -0.08715574274765829, 0.9961946980917455)), keep=Keep.TOP, mode=Mode.PRIVATE)
    chamfer1_piece_18 = split(chamfer1_piece_18, bisect_by=Plane(origin=(-3.64073373, 4.144649452, -16), z_dir=(0.9961946980917455, 0.08715574274765821, 0)), keep=Keep.TOP, mode=Mode.PRIVATE)
    chamfer1_piece_18 = split(chamfer1_piece_18, bisect_by=Plane(origin=(-1.993289961, 5.360769289, -3.747130429), z_dir=(0, -0.08715574274765829, -0.9961946980917455)), keep=Keep.TOP, mode=Mode.PRIVATE)
    add(chamfer1_piece_18)
    with BuildSketch(Plane(origin=(-1.25799692, 5.2, 5.830274952), x_dir=(0.11197305485280797, -0.9937112432628151, 0), z_dir=(0, 0, -1))) as chamfer1_piece_19_section:
        Polygon((CHAMFER1_SIZE_2 * 0.99968896676, CHAMFER1_SIZE_2 * 0.0249393220908), (-CHAMFER1_SIZE * 0.111973054853, CHAMFER1_SIZE * 0.993711243263), (0, 0), align=None)
    chamfer1_piece_19 = extrude(amount=43.660549905, mode=Mode.PRIVATE)
    chamfer1_piece_19 = split(chamfer1_piece_19, bisect_by=Plane(origin=(-1.99521412, 4.399612159, -30.812027942), z_dir=(0, -0.08715574274765836, 0.9961946980917455)), keep=Keep.TOP, mode=Mode.PRIVATE)
    chamfer1_piece_19 = split(chamfer1_piece_19, bisect_by=Plane(origin=(-1.99521412, 4.184716633, -28.355760846), z_dir=(0, 0.08715574274765829, -0.9961946980917455)), keep=Keep.TOP, mode=Mode.PRIVATE)
    chamfer1_piece_19 = split(chamfer1_piece_19, bisect_by=Plane(origin=(-3.641042011, 4.148173113, -29.583894394), z_dir=(0.9961946980917455, 0.08715574274765821, 0)), keep=Keep.TOP, mode=Mode.PRIVATE)
    add(chamfer1_piece_19)
    with BuildSketch(Plane(origin=(-1.25799692, 5.2, 5.830274952), x_dir=(0.11197305485280797, -0.9937112432628151, 0), z_dir=(0, 0, -1))) as chamfer1_piece_20_section:
        Polygon((CHAMFER1_SIZE_2 * 0.99968896676, CHAMFER1_SIZE_2 * 0.0249393220908), (-CHAMFER1_SIZE * 0.111973054853, CHAMFER1_SIZE * 0.993711243263), (0, 0), align=None)
    chamfer1_piece_20 = extrude(amount=43.660549905, mode=Mode.PRIVATE)
    chamfer1_piece_20 = split(chamfer1_piece_20, bisect_by=Plane(origin=(-3.779154262, 5.379537315, -30.7262956), z_dir=(0, -0.08715574274765836, 0.9961946980917455)), keep=Keep.TOP, mode=Mode.PRIVATE)
    chamfer1_piece_20 = split(chamfer1_piece_20, bisect_by=Plane(origin=(-3.779154262, 5.164641789, -28.270028503), z_dir=(0, 0.08715574274765829, -0.9961946980917455)), keep=Keep.TOP, mode=Mode.PRIVATE)
    chamfer1_piece_20 = split(chamfer1_piece_20, bisect_by=Plane(origin=(-3.739674149, 5.275543614, -29.498162052), z_dir=(-0.9961946980917455, -0.08715574274765821, 0)), keep=Keep.TOP, mode=Mode.PRIVATE)
    add(chamfer1_piece_20)


solid = part.part
